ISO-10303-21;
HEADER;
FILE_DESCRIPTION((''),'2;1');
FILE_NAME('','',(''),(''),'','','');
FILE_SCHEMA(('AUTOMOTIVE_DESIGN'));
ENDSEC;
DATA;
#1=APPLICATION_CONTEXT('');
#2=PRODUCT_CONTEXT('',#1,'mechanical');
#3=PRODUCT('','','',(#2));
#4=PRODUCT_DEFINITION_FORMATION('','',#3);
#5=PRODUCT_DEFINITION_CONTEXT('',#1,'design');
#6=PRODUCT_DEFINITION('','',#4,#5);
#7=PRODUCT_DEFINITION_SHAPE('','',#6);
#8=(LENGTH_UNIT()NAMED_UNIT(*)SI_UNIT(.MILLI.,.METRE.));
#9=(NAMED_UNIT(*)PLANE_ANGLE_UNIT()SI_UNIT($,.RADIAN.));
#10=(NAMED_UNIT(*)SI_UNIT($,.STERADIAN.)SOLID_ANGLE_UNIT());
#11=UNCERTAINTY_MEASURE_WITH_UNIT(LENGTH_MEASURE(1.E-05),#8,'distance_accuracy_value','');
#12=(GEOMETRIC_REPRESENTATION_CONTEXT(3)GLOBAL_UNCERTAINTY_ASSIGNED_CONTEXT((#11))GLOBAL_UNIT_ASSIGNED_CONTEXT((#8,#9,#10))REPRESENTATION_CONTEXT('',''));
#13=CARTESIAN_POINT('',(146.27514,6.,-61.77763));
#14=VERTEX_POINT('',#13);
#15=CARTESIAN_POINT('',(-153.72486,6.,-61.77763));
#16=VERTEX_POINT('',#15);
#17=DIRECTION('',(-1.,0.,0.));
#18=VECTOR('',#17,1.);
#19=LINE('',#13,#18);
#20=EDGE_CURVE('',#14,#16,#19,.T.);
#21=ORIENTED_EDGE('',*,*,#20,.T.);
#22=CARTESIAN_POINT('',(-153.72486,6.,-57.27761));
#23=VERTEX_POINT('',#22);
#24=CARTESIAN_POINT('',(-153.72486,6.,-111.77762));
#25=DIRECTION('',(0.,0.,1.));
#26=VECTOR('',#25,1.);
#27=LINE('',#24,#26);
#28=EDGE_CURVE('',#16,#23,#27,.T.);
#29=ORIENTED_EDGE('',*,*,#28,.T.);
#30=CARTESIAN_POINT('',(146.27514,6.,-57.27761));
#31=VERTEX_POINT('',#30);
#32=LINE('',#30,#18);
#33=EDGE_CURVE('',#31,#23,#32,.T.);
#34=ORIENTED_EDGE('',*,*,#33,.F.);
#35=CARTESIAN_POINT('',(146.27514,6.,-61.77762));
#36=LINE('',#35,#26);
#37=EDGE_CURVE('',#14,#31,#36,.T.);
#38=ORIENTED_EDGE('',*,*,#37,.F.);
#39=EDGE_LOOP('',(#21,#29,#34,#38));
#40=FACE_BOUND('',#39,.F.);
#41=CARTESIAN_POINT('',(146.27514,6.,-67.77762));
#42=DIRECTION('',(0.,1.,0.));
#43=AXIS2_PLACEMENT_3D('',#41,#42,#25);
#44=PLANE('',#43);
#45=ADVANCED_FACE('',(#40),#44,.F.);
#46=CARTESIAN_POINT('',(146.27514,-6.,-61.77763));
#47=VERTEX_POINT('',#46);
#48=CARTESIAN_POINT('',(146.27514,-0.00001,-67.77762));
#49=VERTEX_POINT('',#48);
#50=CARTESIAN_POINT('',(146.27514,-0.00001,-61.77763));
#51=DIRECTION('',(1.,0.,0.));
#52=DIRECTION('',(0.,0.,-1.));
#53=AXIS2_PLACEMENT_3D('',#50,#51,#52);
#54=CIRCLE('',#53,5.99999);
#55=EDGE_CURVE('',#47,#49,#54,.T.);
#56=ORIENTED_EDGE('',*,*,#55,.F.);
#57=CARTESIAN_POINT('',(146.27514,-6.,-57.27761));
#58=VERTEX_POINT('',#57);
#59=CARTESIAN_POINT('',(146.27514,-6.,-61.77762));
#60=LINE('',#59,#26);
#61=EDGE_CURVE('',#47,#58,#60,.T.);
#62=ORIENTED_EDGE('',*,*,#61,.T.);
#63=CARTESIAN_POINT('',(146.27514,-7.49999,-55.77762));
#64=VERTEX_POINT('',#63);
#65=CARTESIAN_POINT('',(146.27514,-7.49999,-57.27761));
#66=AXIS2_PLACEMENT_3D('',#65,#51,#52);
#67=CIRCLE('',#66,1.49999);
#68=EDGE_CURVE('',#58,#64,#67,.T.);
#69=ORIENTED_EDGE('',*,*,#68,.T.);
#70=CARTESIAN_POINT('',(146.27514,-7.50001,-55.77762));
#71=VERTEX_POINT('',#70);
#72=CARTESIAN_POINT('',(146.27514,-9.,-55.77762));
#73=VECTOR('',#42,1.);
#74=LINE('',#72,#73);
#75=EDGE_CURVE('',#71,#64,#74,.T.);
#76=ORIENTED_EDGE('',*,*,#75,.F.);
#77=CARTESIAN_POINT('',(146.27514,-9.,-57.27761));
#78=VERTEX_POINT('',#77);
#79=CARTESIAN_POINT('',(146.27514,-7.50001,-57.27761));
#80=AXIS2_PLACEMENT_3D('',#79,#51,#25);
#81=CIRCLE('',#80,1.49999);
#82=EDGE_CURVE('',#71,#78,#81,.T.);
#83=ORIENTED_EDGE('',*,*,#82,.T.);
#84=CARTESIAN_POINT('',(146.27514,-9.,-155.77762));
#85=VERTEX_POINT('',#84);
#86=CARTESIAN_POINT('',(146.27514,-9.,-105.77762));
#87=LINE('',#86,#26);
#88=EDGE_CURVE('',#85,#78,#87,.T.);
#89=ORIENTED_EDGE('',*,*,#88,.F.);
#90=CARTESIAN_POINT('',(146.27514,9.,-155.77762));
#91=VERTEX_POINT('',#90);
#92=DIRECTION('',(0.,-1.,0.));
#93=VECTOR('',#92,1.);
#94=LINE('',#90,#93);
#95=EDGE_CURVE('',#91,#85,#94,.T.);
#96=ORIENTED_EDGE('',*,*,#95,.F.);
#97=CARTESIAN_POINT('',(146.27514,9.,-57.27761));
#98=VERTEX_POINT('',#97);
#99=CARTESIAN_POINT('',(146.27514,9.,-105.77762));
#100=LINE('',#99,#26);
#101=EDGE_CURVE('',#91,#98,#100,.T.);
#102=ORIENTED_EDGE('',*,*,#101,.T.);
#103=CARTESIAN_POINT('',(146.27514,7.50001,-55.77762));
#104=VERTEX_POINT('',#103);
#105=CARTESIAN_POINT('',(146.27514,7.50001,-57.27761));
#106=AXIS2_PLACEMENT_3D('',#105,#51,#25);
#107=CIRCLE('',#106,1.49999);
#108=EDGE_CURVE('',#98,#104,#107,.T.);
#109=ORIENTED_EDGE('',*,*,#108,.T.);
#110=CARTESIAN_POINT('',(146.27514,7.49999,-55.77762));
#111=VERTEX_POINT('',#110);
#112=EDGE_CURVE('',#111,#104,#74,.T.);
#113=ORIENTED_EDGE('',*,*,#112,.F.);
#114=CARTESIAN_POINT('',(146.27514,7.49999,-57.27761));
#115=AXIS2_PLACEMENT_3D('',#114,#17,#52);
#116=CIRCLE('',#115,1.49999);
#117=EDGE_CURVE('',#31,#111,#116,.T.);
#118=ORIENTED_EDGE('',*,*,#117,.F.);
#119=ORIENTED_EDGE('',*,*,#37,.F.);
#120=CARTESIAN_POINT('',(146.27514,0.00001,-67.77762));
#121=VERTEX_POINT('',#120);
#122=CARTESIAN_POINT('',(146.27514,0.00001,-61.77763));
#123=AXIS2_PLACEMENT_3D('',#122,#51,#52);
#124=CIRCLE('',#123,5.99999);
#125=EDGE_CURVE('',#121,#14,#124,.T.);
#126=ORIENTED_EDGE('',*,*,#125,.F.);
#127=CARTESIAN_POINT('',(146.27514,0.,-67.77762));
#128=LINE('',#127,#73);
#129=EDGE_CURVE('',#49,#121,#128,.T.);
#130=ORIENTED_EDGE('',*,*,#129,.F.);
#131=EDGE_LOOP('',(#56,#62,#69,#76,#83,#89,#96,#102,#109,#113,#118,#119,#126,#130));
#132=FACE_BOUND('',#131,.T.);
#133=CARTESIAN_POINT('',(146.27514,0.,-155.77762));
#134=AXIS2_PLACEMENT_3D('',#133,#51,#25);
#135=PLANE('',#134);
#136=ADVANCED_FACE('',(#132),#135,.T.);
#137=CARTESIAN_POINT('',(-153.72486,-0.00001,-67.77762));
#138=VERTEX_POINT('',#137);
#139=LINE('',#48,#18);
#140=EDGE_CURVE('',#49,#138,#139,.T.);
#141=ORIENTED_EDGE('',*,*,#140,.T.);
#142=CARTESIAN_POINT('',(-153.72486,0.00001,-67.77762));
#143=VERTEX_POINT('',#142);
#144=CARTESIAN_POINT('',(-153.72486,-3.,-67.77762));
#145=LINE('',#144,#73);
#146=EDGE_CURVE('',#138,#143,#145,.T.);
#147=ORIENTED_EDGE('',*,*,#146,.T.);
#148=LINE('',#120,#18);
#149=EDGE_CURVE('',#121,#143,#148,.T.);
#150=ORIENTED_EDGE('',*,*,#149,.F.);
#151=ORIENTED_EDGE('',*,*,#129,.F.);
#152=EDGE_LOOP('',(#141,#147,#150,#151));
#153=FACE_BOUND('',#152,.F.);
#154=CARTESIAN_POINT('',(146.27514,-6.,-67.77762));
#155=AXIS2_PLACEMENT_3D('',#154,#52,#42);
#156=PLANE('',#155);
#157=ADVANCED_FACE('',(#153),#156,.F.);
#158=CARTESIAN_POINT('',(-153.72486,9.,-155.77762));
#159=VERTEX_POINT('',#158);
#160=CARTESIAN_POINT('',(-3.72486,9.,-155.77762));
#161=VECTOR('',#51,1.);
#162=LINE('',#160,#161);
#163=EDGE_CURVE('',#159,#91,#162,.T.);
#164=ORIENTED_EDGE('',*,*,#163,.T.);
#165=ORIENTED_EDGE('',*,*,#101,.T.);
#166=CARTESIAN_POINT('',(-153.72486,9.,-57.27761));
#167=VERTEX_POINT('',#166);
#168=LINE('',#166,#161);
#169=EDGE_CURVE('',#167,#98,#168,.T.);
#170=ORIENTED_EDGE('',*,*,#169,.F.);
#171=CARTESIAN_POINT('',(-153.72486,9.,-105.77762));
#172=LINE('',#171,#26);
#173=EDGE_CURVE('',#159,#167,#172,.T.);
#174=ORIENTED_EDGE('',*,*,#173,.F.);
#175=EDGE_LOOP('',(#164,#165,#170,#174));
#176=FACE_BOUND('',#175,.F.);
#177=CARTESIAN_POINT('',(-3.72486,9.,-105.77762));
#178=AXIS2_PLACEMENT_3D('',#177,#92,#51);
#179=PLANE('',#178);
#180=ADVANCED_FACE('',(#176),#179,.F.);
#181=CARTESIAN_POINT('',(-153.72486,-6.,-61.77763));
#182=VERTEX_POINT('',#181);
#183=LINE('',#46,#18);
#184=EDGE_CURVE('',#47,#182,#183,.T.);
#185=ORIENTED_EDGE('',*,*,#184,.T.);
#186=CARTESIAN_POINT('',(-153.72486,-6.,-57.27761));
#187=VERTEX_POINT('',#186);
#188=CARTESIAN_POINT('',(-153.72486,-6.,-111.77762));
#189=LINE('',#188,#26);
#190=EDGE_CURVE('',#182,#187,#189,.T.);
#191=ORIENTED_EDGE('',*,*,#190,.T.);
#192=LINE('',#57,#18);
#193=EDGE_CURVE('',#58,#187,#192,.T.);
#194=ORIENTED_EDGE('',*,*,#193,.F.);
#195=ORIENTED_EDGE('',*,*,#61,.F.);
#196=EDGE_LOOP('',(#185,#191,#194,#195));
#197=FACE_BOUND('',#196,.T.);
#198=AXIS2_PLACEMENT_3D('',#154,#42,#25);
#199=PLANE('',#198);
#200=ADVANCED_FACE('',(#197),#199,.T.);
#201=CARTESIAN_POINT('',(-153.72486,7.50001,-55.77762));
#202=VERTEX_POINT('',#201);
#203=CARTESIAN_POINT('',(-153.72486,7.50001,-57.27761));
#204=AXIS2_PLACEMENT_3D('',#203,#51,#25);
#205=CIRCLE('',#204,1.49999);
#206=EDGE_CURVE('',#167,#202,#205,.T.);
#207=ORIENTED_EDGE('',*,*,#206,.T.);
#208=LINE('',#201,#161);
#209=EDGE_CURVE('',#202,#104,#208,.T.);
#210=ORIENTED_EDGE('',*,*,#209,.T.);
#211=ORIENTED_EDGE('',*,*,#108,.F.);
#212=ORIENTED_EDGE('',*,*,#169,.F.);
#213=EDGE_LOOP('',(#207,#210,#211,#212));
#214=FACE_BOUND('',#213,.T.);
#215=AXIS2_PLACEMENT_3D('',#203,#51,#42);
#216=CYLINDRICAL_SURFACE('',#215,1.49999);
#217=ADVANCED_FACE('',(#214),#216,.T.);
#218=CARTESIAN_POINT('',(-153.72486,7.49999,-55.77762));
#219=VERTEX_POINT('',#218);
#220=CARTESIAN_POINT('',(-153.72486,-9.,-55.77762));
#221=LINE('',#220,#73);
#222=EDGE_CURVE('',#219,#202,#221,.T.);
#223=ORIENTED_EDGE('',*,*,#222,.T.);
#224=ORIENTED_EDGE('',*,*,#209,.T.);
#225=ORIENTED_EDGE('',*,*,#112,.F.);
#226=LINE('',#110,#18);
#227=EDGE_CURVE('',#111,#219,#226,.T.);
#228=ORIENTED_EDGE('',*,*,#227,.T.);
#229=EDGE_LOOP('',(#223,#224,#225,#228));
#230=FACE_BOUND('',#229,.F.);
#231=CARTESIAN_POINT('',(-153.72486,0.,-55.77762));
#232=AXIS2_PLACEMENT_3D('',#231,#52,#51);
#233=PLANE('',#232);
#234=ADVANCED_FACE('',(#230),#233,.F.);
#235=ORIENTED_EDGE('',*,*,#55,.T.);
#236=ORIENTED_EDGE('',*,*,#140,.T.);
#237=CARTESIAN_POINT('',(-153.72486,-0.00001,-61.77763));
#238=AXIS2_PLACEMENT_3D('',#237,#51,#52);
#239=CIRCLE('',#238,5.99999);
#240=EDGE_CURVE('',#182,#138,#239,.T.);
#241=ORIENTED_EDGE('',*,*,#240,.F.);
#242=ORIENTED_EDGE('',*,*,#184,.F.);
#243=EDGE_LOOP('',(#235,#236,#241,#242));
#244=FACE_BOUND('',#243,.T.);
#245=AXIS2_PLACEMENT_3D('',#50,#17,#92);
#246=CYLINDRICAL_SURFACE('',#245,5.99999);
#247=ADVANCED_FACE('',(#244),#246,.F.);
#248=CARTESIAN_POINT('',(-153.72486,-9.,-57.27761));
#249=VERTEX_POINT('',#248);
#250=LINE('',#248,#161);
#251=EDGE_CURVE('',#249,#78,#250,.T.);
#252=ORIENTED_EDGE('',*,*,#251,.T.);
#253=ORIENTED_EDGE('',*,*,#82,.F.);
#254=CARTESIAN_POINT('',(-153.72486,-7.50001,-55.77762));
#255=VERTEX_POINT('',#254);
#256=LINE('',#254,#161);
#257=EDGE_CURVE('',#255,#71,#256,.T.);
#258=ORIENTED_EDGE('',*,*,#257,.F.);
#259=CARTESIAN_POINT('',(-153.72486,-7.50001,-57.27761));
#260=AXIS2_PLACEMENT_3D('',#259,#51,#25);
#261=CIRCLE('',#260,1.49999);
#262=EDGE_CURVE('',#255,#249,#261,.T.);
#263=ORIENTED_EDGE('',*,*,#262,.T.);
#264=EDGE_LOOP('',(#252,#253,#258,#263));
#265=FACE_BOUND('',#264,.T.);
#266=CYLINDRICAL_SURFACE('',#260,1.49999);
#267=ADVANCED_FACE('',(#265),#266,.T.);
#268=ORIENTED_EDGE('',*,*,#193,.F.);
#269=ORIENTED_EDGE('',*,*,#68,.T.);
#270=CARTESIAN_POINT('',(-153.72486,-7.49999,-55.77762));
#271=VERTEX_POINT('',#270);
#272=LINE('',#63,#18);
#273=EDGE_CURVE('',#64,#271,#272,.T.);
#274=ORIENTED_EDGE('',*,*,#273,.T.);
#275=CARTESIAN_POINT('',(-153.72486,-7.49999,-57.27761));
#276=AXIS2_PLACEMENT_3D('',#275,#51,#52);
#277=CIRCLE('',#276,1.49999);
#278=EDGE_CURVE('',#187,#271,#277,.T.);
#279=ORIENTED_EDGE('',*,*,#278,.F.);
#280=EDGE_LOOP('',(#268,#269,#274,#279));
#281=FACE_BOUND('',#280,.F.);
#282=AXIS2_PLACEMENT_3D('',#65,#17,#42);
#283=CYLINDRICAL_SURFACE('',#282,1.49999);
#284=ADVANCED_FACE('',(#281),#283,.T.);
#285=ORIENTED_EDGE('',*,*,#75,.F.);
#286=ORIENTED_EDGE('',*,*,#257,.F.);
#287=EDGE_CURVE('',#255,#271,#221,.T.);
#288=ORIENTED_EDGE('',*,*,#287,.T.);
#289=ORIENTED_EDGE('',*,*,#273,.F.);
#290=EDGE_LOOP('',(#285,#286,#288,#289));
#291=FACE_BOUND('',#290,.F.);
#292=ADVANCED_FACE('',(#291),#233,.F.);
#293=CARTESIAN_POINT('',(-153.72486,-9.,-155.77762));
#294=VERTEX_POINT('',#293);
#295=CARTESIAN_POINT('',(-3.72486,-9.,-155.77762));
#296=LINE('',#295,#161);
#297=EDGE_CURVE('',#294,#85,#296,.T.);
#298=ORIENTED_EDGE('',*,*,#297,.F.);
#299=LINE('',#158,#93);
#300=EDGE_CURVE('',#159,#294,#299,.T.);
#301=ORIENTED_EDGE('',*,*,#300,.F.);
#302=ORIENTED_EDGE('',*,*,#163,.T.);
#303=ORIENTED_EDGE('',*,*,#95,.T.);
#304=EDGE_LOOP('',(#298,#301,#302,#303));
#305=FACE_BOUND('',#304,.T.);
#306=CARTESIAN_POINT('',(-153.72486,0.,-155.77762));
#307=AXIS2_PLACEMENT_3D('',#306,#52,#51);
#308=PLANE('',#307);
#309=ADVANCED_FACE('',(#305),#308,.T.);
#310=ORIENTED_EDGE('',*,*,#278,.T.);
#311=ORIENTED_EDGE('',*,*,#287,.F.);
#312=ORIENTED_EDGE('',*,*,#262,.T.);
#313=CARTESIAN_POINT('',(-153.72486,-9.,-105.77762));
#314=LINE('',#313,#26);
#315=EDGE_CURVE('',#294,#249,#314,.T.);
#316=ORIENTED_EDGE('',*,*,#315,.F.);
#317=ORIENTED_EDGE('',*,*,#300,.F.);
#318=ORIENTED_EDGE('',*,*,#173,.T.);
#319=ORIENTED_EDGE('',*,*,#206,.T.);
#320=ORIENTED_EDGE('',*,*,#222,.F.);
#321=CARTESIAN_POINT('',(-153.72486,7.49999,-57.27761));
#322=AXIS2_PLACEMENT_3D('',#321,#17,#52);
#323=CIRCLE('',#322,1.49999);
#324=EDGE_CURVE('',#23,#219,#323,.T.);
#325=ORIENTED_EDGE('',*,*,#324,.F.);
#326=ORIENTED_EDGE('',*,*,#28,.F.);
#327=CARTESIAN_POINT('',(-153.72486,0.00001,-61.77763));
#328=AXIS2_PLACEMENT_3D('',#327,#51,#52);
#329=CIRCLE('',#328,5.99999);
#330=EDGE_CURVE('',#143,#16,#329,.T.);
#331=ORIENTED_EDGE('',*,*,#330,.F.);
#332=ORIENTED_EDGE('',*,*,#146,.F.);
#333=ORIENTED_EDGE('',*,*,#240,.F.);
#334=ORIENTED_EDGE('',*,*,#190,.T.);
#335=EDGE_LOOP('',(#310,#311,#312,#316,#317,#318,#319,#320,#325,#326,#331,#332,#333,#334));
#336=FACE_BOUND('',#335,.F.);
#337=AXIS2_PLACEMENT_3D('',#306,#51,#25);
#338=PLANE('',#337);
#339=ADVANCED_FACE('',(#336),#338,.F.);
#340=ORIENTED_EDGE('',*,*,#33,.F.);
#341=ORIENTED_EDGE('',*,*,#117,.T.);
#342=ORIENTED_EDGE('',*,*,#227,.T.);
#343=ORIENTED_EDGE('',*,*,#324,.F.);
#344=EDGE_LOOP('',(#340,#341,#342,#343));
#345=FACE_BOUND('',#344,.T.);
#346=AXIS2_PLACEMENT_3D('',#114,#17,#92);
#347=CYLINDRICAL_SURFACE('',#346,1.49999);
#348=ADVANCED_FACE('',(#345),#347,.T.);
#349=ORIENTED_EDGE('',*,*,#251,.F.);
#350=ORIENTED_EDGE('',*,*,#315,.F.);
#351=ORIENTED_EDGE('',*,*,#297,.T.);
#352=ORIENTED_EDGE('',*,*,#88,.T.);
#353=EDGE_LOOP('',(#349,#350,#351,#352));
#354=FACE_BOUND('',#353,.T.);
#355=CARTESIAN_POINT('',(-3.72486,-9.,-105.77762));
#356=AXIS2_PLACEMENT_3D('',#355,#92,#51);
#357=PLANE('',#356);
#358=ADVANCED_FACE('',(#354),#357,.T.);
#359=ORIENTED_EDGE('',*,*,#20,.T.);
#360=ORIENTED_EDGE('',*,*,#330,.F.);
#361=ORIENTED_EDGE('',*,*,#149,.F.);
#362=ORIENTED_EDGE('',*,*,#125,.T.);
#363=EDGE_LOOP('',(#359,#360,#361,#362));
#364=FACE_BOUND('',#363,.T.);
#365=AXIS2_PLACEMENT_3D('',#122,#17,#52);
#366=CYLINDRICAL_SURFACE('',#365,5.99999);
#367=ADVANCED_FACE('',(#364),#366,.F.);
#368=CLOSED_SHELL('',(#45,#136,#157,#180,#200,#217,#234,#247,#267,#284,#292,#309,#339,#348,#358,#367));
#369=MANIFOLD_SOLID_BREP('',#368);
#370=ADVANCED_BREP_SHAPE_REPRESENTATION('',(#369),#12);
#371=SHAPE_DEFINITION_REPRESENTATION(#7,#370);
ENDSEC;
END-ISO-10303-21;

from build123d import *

# Parameters (mm, degrees)
F0_W     = 300
F0_H     = 100
F1_DEPTH = 9
F2_W     = 12
F2_H     = 12
F3_DEPTH = 300.001
F4_R     = 5.99999
F5_R     = 1.49999


# Not quite as in the source:
# - a fillet or chamfer is up to 0.001 mm smaller than in the source, because OpenCascade refuses the exact size


with BuildPart() as f1:
    # F0 (on Front) → F1 (new body, symmetric)
    with BuildSketch(Plane.XZ):
        with Locations((-3.7248600274, -105.7776198197)):
            Rectangle(F0_W, F0_H)
    extrude(amount=F1_DEPTH, both=True)

    # F2 (on face) → F3 (cut, through all)
    with BuildSketch(Plane.YZ.offset(146.2751399726)):
        with Locations((0, -61.7776198197)):
            Rectangle(F2_W, F2_H)
    extrude(amount=-F3_DEPTH, mode=Mode.SUBTRACT)

    # F4 (radius 6 in the source; OpenCascade refuses exactly that, so slightly less here)
    f4_edges = [f1.edges().sort_by_distance(p)[0] for p in [
        (-3.72486, 6, -67.77762),
        (-3.72486, -6, -67.77762),
    ]]
    fillet(f4_edges, radius=F4_R)

    # F5 (radius 1.5 in the source; OpenCascade refuses exactly that, so slightly less here)
    f5_edges = [f1.edges().sort_by_distance(p)[0] for p in [
        (-3.72486, -9, -55.77762),
        (-3.72486, -6, -55.77762),
        (-3.72486, 6, -55.77762),
        (-3.72486, 9, -55.77762),
    ]]
    fillet(f5_edges, radius=F5_R)


solid = f1.part
